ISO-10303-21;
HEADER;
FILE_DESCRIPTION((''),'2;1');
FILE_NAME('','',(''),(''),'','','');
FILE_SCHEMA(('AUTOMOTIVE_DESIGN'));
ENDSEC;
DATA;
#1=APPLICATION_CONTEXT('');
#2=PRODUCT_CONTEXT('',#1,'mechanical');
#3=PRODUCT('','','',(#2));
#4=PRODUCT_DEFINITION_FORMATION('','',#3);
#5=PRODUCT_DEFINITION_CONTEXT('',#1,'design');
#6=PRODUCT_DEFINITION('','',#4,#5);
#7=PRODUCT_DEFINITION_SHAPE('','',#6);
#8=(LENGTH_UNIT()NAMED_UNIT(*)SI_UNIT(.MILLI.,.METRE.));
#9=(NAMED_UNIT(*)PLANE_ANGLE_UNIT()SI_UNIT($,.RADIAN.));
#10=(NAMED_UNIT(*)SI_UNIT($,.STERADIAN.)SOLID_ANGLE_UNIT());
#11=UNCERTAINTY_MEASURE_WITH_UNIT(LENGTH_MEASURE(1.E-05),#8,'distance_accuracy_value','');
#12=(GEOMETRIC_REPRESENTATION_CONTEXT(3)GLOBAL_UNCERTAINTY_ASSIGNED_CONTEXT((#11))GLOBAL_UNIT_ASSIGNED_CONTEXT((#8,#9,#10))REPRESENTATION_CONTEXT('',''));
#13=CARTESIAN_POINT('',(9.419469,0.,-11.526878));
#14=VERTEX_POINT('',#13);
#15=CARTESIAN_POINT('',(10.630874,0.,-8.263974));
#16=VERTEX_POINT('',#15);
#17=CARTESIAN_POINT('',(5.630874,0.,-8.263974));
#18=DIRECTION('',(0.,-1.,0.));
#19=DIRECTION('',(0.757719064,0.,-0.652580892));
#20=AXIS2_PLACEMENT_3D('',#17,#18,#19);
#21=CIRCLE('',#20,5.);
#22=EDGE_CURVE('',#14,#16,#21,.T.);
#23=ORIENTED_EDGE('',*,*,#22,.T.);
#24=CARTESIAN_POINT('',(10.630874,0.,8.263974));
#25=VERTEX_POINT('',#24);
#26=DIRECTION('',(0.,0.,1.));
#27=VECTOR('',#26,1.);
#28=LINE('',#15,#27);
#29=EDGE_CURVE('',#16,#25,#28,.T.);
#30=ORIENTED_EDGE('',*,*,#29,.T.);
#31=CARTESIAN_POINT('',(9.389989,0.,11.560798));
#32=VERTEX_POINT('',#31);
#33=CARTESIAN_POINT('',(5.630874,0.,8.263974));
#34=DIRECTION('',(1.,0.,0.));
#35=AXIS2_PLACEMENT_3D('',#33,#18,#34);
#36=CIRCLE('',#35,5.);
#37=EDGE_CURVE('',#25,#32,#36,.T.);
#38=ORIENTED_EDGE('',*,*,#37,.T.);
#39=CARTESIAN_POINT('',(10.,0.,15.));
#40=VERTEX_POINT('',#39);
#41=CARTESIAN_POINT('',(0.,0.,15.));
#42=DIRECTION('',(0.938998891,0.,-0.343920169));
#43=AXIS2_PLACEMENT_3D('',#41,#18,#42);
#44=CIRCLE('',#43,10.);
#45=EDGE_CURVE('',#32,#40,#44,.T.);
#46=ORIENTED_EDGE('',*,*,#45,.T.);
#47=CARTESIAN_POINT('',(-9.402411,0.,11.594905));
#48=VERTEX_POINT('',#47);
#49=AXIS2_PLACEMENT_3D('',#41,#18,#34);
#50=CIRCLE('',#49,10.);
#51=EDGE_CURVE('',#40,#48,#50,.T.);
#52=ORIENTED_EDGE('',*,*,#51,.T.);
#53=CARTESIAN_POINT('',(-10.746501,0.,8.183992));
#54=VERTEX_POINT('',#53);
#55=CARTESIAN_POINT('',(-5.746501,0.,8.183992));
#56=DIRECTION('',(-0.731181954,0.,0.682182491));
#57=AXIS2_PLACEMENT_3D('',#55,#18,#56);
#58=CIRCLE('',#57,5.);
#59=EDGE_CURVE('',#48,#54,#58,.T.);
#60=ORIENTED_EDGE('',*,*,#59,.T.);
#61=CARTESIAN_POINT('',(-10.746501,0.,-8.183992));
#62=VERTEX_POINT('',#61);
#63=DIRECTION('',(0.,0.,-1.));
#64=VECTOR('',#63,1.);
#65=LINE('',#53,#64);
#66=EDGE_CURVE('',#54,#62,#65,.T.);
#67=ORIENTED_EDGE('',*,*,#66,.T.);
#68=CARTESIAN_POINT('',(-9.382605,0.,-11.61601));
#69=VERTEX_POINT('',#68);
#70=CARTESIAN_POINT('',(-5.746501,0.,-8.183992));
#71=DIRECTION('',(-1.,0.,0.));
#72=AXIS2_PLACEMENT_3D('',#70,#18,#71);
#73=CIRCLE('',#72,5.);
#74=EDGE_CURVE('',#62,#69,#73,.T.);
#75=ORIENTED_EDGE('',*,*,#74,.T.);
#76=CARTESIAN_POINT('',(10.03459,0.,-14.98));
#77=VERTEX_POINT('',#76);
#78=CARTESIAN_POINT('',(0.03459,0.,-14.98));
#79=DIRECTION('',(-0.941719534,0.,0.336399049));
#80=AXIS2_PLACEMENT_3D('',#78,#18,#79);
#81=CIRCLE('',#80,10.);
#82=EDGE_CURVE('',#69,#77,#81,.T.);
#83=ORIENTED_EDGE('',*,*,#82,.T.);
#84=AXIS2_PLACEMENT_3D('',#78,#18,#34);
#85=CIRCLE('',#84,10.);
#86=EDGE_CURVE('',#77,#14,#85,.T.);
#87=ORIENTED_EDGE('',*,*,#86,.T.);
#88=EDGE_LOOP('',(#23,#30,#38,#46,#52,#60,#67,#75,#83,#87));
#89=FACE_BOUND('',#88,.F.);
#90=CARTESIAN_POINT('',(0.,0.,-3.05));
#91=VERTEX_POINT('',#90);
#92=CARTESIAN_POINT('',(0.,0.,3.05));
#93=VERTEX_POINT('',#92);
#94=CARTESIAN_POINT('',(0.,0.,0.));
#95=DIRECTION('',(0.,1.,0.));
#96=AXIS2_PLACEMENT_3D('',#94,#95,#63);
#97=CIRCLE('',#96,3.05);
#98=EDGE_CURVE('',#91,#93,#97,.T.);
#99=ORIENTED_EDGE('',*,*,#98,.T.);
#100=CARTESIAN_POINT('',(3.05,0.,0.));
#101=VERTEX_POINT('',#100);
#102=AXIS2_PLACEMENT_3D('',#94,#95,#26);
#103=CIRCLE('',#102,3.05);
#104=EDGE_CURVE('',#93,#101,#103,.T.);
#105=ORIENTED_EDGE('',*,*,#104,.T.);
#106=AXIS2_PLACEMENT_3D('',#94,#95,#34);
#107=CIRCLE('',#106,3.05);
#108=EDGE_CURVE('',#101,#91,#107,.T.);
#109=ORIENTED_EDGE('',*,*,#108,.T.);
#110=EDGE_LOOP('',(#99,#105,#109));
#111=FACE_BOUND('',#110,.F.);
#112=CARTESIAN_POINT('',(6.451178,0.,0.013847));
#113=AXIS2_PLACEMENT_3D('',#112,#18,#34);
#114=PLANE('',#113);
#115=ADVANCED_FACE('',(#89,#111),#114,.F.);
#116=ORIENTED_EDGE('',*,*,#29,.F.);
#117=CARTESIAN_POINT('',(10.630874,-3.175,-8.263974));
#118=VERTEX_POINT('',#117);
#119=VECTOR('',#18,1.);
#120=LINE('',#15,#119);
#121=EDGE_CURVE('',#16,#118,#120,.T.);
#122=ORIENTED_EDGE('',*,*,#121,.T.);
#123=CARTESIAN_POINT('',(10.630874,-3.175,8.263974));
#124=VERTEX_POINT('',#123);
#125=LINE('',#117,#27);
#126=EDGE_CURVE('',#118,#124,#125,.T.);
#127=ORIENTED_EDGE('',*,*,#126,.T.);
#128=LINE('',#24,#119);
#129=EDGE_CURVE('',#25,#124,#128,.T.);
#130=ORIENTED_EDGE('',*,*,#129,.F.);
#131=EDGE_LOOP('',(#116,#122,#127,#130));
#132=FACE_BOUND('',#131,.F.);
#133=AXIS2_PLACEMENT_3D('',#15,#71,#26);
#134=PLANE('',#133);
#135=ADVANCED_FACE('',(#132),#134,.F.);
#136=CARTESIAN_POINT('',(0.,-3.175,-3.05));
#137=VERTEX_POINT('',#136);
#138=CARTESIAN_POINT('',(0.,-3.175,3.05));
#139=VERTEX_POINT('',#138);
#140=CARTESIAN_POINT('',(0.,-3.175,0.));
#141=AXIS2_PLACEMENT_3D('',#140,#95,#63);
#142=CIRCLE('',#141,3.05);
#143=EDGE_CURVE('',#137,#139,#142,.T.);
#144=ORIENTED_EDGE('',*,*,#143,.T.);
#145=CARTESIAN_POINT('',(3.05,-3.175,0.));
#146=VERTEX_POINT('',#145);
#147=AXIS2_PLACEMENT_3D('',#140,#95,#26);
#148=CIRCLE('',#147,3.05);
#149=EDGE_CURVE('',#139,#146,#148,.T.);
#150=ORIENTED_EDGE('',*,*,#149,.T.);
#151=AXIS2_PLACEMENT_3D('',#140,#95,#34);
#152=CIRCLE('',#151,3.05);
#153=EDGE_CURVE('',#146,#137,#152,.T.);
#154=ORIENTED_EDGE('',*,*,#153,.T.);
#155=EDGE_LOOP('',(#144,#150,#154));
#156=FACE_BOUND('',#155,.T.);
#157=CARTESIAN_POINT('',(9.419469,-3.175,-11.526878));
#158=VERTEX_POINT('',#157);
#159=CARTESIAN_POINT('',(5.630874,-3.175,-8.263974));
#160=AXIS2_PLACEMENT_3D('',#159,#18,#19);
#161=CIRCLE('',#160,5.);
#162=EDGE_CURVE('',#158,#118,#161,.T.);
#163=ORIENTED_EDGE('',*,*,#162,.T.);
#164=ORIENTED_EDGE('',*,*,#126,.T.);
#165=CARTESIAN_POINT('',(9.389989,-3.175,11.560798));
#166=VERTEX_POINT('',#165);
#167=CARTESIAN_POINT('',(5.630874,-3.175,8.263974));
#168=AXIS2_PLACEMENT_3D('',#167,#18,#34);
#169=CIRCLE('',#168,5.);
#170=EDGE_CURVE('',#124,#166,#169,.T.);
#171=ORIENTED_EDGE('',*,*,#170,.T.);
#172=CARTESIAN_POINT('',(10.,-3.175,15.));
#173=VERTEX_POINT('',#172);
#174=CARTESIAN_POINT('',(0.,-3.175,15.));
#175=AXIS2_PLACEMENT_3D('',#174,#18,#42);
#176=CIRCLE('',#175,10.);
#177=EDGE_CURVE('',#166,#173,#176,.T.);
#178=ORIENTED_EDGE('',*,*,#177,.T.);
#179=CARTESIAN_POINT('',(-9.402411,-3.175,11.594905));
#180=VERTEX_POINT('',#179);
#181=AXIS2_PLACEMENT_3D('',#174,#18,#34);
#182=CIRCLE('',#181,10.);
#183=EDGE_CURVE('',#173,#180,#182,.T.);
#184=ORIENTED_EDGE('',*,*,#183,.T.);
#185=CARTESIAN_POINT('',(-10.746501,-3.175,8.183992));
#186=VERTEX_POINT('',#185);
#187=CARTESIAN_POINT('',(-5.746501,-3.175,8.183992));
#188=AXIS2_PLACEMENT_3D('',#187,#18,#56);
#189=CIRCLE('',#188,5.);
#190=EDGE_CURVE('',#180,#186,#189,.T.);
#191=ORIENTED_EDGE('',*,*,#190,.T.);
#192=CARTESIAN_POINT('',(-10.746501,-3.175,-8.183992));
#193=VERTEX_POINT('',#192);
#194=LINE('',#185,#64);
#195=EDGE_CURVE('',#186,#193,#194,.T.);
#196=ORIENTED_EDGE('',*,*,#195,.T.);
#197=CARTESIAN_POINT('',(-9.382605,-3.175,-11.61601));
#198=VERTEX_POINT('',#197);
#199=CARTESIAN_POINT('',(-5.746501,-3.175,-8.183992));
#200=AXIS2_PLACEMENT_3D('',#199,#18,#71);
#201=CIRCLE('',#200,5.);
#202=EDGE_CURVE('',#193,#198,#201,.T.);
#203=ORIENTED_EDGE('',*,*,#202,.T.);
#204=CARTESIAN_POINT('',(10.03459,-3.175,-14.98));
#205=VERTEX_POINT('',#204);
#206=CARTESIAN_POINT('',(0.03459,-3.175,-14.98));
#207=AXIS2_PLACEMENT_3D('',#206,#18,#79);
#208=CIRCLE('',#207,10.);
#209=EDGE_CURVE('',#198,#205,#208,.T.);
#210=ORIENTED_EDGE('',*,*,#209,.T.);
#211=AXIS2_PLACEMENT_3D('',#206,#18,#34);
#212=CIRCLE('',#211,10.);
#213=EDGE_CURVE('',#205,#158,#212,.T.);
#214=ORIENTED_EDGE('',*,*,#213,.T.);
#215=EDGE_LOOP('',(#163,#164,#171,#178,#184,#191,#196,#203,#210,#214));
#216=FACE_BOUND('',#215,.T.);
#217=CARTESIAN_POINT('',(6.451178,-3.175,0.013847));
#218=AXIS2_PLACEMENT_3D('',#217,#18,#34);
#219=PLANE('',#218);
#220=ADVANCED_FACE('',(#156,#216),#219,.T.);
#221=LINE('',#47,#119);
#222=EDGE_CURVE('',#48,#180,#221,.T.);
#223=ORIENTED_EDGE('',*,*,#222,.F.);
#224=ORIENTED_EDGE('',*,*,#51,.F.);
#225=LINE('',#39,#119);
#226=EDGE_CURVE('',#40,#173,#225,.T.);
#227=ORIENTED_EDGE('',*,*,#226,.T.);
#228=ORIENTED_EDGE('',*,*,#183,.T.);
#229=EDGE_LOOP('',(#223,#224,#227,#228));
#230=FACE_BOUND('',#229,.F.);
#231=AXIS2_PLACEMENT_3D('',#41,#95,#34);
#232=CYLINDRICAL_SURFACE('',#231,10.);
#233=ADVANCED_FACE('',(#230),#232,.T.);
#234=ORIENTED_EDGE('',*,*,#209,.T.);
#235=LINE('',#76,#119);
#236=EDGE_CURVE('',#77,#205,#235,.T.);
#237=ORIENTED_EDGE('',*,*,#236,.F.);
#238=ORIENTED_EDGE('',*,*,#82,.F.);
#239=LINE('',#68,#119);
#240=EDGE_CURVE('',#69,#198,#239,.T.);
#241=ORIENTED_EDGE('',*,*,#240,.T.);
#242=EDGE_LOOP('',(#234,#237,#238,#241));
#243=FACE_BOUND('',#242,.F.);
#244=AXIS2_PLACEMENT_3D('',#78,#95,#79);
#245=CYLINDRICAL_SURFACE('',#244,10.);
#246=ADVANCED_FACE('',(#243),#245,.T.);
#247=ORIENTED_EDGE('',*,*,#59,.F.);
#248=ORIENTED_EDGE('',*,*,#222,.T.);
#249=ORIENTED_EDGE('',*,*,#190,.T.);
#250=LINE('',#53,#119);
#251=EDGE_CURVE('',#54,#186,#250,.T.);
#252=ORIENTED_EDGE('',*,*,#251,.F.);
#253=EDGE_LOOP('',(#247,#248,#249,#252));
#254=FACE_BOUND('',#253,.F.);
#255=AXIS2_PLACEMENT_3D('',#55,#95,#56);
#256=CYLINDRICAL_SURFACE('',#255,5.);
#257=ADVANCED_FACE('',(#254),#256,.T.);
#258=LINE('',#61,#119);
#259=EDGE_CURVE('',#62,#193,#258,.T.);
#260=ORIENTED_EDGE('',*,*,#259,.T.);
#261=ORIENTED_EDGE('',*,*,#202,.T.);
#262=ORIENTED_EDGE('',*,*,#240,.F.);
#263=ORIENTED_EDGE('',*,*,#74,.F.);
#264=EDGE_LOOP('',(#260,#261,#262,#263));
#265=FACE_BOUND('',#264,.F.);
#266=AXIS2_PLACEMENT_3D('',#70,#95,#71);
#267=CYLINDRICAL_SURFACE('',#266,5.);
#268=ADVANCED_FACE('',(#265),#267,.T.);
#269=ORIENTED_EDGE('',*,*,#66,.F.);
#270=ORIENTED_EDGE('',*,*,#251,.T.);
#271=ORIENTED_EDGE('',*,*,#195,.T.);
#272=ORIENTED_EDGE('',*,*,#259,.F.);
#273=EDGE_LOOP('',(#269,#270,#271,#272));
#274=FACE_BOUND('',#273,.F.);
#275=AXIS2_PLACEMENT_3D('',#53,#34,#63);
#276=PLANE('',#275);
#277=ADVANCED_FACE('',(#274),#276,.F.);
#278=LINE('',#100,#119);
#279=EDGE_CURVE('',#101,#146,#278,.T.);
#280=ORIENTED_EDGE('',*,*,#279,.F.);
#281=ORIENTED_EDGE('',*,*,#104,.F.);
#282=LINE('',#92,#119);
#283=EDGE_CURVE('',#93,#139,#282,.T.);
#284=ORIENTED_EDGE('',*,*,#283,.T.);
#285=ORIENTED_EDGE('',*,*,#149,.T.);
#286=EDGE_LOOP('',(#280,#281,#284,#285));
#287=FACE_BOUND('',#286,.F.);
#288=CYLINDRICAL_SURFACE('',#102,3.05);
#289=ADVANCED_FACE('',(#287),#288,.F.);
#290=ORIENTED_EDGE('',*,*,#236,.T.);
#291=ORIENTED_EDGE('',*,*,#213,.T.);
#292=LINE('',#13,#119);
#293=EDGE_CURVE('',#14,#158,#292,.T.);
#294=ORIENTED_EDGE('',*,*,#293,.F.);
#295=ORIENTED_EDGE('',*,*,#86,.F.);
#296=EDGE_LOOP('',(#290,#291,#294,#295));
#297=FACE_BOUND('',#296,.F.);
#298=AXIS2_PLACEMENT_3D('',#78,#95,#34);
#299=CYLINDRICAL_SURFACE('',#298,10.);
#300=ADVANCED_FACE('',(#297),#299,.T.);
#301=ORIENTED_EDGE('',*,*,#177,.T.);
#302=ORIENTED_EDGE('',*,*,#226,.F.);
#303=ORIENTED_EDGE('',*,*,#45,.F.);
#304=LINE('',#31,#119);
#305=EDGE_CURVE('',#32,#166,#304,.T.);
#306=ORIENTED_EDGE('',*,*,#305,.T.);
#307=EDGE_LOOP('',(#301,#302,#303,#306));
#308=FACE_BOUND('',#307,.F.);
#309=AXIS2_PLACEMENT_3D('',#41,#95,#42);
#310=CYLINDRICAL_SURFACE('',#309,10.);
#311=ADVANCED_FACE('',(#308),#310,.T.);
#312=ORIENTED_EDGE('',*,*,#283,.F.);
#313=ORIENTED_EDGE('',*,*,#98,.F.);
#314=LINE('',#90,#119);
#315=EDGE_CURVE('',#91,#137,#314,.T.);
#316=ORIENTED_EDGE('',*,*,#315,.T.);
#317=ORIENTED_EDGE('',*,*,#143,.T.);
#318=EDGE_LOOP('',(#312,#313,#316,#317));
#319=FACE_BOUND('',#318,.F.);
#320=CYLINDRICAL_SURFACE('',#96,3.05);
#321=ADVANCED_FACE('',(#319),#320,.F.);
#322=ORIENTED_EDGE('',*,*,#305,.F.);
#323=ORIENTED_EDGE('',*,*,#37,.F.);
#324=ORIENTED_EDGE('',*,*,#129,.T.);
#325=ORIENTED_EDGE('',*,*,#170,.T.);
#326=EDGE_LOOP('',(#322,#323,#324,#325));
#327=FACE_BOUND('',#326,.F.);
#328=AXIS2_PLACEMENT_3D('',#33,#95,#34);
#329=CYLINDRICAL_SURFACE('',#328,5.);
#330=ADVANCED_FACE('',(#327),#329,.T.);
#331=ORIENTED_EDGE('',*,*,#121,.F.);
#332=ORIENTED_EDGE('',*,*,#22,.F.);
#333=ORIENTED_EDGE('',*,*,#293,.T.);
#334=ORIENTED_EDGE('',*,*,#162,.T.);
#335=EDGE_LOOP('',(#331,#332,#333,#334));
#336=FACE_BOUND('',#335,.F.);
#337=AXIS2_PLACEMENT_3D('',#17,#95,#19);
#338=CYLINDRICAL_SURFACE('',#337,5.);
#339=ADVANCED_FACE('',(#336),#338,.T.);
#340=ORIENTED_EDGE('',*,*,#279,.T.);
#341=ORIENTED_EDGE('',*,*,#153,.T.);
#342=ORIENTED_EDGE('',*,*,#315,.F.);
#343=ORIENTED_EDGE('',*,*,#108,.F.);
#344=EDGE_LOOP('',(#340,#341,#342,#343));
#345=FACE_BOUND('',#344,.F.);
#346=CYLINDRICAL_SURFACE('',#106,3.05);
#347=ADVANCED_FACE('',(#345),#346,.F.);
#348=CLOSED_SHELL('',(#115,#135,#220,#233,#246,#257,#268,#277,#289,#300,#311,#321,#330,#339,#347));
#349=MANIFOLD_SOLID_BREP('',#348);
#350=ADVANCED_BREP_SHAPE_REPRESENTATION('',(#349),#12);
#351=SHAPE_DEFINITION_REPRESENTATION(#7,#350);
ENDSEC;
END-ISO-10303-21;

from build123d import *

# Parameters (mm, degrees)
F1_DEPTH = 3.175


# Not quite as in the source:
# - a feature names something its author has since deleted; it is built from what else it names


with BuildPart() as f1:
    # F0 (on Front) → F1 (new body)
    with BuildSketch(Plane.XZ):
        with BuildLine():
            ThreePointArc((0, 3.05), (2.1566756826, 2.1566756826), (3.05, 0))
            ThreePointArc((3.05, 0), (2.1566756826, -2.1566756826), (0, -3.05))
            Line((0, -3.05), (0, -4.9800602682))
            ThreePointArc((0, -4.9800602682), (5.7417944409, -6.7685559702), (9.4194688927, -11.5268782485))
            ThreePointArc((9.4194688927, -11.5268782485), (10.31824899, -10.0042357535), (10.6308735731, -8.2639737901))
            Line((10.6308735731, -8.2639737901), (10.6308735731, 8.2639737901))
            ThreePointArc((10.6308735731, 8.2639737901), (10.3103808484, 10.0252834336), (9.389988909, 11.5607983065))
            ThreePointArc((9.389988909, 11.5607983065), (5.7274768906, 6.8026828494), (0, 5))
            Line((0, 5), (0, 3.05))
        make_face()
        with BuildLine():
            ThreePointArc((0, -3.05), (-3.05, 0), (0, 3.05))
            Line((0, 3.05), (0, 5))
            ThreePointArc((0, 5), (-5.7423447428, 6.8130911295), (-9.4024106226, 11.5949046291))
            ThreePointArc((-9.4024106226, 11.5949046291), (-10.3983579477, 10.0170839844), (-10.7465008538, 8.183992176))
            Line((-10.7465008538, 8.183992176), (-10.7465008538, -8.183992176))
            ThreePointArc((-10.7465008538, -8.183992176), (-10.3930329558, -10.0305401514), (-9.3826050837, -11.6160099542))
            ThreePointArc((-9.3826050837, -11.6160099542), (-5.739751248, -6.8156278258), (0, -4.9800602682))
            Line((0, -4.9800602682), (0, -3.05))
        make_face()
        with BuildLine():
            ThreePointArc((-9.4024106226, 11.5949046291), (-5.7423447428, 6.8130911295), (0, 5))
            Line((0, 5), (0, 15))
            ThreePointArc((0, 15), (-4.5199654888, 14.3027938523), (-8.6197512808, 12.275988264))
            ThreePointArc((-8.6197512808, 12.275988264), (-9.0287945556, 11.9558018286), (-9.4024106226, 11.5949046291))
        make_face()
        with BuildLine():
            Line((0, 15), (0, 5))
            ThreePointArc((0, 5), (5.7274768906, 6.8026828494), (9.389988909, 11.5607983065))
            ThreePointArc((9.389988909, 11.5607983065), (8.9445660683, 12.0082283284), (8.4463103597, 12.3959606852))
            ThreePointArc((8.4463103597, 12.3959606852), (4.4193093195, 14.3342144933), (0, 15))
        make_face()
        with BuildLine():
            ThreePointArc((9.4194688927, -11.5268782485), (5.7417944409, -6.7685559702), (0, -4.9800602682))
            Line((0, -4.9800602682), (0, -15))
            ThreePointArc((0, -15), (4.4193093195, -14.3342144933), (8.4463103597, -12.3959606852))
            ThreePointArc((8.4463103597, -12.3959606852), (8.9613594363, -11.9932986506), (9.4194688927, -11.5268782485))
        make_face()
        with BuildLine():
            Line((0, -15), (0, -4.9800602682))
            ThreePointArc((0, -4.9800602682), (-5.739751248, -6.8156278258), (-9.3826050837, -11.6160099542))
            ThreePointArc((-9.3826050837, -11.6160099542), (-9.0178640795, -11.9652859553), (-8.6197512808, -12.275988264))
            ThreePointArc((-8.6197512808, -12.275988264), (-4.5199654888, -14.3027938523), (0, -15))
        make_face()
        with BuildLine():
            ThreePointArc((-8.6197512808, 12.275988264), (-4.5199654888, 14.3027938523), (0, 15))
            ThreePointArc((0, 15), (4.4193093195, 14.3342144933), (8.4463103597, 12.3959606852))
            ThreePointArc((8.4463103597, 12.3959606852), (8.9445660683, 12.0082283284), (9.389988909, 11.5607983065))
            ThreePointArc((9.389988909, 11.5607983065), (9.8463162932, 13.2535592037), (10, 15))
            ThreePointArc((10, 15), (-1.7285678717, 24.8494696869), (-9.4024106226, 11.5949046291))
            ThreePointArc((-9.4024106226, 11.5949046291), (-9.0287945556, 11.9558018286), (-8.6197512808, 12.275988264))
        make_face()
        with BuildLine():
            ThreePointArc((8.4463103597, -12.3959606852), (4.4193093195, -14.3342144933), (0, -15))
            ThreePointArc((0, -15), (-4.5199654888, -14.3027938523), (-8.6197512808, -12.275988264))
            ThreePointArc((-8.6197512808, -12.275988264), (-9.0178640795, -11.9652859553), (-9.3826050837, -11.6160099542))
            ThreePointArc((-9.3826050837, -11.6160099542), (-1.6724608086, -24.8332220833), (10.0345902517, -14.9800004438))
            ThreePointArc((10.0345902517, -14.9800004438), (9.8796089518, -13.2262596432), (9.4194688927, -11.5268782485))
            ThreePointArc((9.4194688927, -11.5268782485), (8.9613594363, -11.9932986506), (8.4463103597, -12.3959606852))
        make_face()
    extrude(amount=F1_DEPTH)


solid = f1.part
